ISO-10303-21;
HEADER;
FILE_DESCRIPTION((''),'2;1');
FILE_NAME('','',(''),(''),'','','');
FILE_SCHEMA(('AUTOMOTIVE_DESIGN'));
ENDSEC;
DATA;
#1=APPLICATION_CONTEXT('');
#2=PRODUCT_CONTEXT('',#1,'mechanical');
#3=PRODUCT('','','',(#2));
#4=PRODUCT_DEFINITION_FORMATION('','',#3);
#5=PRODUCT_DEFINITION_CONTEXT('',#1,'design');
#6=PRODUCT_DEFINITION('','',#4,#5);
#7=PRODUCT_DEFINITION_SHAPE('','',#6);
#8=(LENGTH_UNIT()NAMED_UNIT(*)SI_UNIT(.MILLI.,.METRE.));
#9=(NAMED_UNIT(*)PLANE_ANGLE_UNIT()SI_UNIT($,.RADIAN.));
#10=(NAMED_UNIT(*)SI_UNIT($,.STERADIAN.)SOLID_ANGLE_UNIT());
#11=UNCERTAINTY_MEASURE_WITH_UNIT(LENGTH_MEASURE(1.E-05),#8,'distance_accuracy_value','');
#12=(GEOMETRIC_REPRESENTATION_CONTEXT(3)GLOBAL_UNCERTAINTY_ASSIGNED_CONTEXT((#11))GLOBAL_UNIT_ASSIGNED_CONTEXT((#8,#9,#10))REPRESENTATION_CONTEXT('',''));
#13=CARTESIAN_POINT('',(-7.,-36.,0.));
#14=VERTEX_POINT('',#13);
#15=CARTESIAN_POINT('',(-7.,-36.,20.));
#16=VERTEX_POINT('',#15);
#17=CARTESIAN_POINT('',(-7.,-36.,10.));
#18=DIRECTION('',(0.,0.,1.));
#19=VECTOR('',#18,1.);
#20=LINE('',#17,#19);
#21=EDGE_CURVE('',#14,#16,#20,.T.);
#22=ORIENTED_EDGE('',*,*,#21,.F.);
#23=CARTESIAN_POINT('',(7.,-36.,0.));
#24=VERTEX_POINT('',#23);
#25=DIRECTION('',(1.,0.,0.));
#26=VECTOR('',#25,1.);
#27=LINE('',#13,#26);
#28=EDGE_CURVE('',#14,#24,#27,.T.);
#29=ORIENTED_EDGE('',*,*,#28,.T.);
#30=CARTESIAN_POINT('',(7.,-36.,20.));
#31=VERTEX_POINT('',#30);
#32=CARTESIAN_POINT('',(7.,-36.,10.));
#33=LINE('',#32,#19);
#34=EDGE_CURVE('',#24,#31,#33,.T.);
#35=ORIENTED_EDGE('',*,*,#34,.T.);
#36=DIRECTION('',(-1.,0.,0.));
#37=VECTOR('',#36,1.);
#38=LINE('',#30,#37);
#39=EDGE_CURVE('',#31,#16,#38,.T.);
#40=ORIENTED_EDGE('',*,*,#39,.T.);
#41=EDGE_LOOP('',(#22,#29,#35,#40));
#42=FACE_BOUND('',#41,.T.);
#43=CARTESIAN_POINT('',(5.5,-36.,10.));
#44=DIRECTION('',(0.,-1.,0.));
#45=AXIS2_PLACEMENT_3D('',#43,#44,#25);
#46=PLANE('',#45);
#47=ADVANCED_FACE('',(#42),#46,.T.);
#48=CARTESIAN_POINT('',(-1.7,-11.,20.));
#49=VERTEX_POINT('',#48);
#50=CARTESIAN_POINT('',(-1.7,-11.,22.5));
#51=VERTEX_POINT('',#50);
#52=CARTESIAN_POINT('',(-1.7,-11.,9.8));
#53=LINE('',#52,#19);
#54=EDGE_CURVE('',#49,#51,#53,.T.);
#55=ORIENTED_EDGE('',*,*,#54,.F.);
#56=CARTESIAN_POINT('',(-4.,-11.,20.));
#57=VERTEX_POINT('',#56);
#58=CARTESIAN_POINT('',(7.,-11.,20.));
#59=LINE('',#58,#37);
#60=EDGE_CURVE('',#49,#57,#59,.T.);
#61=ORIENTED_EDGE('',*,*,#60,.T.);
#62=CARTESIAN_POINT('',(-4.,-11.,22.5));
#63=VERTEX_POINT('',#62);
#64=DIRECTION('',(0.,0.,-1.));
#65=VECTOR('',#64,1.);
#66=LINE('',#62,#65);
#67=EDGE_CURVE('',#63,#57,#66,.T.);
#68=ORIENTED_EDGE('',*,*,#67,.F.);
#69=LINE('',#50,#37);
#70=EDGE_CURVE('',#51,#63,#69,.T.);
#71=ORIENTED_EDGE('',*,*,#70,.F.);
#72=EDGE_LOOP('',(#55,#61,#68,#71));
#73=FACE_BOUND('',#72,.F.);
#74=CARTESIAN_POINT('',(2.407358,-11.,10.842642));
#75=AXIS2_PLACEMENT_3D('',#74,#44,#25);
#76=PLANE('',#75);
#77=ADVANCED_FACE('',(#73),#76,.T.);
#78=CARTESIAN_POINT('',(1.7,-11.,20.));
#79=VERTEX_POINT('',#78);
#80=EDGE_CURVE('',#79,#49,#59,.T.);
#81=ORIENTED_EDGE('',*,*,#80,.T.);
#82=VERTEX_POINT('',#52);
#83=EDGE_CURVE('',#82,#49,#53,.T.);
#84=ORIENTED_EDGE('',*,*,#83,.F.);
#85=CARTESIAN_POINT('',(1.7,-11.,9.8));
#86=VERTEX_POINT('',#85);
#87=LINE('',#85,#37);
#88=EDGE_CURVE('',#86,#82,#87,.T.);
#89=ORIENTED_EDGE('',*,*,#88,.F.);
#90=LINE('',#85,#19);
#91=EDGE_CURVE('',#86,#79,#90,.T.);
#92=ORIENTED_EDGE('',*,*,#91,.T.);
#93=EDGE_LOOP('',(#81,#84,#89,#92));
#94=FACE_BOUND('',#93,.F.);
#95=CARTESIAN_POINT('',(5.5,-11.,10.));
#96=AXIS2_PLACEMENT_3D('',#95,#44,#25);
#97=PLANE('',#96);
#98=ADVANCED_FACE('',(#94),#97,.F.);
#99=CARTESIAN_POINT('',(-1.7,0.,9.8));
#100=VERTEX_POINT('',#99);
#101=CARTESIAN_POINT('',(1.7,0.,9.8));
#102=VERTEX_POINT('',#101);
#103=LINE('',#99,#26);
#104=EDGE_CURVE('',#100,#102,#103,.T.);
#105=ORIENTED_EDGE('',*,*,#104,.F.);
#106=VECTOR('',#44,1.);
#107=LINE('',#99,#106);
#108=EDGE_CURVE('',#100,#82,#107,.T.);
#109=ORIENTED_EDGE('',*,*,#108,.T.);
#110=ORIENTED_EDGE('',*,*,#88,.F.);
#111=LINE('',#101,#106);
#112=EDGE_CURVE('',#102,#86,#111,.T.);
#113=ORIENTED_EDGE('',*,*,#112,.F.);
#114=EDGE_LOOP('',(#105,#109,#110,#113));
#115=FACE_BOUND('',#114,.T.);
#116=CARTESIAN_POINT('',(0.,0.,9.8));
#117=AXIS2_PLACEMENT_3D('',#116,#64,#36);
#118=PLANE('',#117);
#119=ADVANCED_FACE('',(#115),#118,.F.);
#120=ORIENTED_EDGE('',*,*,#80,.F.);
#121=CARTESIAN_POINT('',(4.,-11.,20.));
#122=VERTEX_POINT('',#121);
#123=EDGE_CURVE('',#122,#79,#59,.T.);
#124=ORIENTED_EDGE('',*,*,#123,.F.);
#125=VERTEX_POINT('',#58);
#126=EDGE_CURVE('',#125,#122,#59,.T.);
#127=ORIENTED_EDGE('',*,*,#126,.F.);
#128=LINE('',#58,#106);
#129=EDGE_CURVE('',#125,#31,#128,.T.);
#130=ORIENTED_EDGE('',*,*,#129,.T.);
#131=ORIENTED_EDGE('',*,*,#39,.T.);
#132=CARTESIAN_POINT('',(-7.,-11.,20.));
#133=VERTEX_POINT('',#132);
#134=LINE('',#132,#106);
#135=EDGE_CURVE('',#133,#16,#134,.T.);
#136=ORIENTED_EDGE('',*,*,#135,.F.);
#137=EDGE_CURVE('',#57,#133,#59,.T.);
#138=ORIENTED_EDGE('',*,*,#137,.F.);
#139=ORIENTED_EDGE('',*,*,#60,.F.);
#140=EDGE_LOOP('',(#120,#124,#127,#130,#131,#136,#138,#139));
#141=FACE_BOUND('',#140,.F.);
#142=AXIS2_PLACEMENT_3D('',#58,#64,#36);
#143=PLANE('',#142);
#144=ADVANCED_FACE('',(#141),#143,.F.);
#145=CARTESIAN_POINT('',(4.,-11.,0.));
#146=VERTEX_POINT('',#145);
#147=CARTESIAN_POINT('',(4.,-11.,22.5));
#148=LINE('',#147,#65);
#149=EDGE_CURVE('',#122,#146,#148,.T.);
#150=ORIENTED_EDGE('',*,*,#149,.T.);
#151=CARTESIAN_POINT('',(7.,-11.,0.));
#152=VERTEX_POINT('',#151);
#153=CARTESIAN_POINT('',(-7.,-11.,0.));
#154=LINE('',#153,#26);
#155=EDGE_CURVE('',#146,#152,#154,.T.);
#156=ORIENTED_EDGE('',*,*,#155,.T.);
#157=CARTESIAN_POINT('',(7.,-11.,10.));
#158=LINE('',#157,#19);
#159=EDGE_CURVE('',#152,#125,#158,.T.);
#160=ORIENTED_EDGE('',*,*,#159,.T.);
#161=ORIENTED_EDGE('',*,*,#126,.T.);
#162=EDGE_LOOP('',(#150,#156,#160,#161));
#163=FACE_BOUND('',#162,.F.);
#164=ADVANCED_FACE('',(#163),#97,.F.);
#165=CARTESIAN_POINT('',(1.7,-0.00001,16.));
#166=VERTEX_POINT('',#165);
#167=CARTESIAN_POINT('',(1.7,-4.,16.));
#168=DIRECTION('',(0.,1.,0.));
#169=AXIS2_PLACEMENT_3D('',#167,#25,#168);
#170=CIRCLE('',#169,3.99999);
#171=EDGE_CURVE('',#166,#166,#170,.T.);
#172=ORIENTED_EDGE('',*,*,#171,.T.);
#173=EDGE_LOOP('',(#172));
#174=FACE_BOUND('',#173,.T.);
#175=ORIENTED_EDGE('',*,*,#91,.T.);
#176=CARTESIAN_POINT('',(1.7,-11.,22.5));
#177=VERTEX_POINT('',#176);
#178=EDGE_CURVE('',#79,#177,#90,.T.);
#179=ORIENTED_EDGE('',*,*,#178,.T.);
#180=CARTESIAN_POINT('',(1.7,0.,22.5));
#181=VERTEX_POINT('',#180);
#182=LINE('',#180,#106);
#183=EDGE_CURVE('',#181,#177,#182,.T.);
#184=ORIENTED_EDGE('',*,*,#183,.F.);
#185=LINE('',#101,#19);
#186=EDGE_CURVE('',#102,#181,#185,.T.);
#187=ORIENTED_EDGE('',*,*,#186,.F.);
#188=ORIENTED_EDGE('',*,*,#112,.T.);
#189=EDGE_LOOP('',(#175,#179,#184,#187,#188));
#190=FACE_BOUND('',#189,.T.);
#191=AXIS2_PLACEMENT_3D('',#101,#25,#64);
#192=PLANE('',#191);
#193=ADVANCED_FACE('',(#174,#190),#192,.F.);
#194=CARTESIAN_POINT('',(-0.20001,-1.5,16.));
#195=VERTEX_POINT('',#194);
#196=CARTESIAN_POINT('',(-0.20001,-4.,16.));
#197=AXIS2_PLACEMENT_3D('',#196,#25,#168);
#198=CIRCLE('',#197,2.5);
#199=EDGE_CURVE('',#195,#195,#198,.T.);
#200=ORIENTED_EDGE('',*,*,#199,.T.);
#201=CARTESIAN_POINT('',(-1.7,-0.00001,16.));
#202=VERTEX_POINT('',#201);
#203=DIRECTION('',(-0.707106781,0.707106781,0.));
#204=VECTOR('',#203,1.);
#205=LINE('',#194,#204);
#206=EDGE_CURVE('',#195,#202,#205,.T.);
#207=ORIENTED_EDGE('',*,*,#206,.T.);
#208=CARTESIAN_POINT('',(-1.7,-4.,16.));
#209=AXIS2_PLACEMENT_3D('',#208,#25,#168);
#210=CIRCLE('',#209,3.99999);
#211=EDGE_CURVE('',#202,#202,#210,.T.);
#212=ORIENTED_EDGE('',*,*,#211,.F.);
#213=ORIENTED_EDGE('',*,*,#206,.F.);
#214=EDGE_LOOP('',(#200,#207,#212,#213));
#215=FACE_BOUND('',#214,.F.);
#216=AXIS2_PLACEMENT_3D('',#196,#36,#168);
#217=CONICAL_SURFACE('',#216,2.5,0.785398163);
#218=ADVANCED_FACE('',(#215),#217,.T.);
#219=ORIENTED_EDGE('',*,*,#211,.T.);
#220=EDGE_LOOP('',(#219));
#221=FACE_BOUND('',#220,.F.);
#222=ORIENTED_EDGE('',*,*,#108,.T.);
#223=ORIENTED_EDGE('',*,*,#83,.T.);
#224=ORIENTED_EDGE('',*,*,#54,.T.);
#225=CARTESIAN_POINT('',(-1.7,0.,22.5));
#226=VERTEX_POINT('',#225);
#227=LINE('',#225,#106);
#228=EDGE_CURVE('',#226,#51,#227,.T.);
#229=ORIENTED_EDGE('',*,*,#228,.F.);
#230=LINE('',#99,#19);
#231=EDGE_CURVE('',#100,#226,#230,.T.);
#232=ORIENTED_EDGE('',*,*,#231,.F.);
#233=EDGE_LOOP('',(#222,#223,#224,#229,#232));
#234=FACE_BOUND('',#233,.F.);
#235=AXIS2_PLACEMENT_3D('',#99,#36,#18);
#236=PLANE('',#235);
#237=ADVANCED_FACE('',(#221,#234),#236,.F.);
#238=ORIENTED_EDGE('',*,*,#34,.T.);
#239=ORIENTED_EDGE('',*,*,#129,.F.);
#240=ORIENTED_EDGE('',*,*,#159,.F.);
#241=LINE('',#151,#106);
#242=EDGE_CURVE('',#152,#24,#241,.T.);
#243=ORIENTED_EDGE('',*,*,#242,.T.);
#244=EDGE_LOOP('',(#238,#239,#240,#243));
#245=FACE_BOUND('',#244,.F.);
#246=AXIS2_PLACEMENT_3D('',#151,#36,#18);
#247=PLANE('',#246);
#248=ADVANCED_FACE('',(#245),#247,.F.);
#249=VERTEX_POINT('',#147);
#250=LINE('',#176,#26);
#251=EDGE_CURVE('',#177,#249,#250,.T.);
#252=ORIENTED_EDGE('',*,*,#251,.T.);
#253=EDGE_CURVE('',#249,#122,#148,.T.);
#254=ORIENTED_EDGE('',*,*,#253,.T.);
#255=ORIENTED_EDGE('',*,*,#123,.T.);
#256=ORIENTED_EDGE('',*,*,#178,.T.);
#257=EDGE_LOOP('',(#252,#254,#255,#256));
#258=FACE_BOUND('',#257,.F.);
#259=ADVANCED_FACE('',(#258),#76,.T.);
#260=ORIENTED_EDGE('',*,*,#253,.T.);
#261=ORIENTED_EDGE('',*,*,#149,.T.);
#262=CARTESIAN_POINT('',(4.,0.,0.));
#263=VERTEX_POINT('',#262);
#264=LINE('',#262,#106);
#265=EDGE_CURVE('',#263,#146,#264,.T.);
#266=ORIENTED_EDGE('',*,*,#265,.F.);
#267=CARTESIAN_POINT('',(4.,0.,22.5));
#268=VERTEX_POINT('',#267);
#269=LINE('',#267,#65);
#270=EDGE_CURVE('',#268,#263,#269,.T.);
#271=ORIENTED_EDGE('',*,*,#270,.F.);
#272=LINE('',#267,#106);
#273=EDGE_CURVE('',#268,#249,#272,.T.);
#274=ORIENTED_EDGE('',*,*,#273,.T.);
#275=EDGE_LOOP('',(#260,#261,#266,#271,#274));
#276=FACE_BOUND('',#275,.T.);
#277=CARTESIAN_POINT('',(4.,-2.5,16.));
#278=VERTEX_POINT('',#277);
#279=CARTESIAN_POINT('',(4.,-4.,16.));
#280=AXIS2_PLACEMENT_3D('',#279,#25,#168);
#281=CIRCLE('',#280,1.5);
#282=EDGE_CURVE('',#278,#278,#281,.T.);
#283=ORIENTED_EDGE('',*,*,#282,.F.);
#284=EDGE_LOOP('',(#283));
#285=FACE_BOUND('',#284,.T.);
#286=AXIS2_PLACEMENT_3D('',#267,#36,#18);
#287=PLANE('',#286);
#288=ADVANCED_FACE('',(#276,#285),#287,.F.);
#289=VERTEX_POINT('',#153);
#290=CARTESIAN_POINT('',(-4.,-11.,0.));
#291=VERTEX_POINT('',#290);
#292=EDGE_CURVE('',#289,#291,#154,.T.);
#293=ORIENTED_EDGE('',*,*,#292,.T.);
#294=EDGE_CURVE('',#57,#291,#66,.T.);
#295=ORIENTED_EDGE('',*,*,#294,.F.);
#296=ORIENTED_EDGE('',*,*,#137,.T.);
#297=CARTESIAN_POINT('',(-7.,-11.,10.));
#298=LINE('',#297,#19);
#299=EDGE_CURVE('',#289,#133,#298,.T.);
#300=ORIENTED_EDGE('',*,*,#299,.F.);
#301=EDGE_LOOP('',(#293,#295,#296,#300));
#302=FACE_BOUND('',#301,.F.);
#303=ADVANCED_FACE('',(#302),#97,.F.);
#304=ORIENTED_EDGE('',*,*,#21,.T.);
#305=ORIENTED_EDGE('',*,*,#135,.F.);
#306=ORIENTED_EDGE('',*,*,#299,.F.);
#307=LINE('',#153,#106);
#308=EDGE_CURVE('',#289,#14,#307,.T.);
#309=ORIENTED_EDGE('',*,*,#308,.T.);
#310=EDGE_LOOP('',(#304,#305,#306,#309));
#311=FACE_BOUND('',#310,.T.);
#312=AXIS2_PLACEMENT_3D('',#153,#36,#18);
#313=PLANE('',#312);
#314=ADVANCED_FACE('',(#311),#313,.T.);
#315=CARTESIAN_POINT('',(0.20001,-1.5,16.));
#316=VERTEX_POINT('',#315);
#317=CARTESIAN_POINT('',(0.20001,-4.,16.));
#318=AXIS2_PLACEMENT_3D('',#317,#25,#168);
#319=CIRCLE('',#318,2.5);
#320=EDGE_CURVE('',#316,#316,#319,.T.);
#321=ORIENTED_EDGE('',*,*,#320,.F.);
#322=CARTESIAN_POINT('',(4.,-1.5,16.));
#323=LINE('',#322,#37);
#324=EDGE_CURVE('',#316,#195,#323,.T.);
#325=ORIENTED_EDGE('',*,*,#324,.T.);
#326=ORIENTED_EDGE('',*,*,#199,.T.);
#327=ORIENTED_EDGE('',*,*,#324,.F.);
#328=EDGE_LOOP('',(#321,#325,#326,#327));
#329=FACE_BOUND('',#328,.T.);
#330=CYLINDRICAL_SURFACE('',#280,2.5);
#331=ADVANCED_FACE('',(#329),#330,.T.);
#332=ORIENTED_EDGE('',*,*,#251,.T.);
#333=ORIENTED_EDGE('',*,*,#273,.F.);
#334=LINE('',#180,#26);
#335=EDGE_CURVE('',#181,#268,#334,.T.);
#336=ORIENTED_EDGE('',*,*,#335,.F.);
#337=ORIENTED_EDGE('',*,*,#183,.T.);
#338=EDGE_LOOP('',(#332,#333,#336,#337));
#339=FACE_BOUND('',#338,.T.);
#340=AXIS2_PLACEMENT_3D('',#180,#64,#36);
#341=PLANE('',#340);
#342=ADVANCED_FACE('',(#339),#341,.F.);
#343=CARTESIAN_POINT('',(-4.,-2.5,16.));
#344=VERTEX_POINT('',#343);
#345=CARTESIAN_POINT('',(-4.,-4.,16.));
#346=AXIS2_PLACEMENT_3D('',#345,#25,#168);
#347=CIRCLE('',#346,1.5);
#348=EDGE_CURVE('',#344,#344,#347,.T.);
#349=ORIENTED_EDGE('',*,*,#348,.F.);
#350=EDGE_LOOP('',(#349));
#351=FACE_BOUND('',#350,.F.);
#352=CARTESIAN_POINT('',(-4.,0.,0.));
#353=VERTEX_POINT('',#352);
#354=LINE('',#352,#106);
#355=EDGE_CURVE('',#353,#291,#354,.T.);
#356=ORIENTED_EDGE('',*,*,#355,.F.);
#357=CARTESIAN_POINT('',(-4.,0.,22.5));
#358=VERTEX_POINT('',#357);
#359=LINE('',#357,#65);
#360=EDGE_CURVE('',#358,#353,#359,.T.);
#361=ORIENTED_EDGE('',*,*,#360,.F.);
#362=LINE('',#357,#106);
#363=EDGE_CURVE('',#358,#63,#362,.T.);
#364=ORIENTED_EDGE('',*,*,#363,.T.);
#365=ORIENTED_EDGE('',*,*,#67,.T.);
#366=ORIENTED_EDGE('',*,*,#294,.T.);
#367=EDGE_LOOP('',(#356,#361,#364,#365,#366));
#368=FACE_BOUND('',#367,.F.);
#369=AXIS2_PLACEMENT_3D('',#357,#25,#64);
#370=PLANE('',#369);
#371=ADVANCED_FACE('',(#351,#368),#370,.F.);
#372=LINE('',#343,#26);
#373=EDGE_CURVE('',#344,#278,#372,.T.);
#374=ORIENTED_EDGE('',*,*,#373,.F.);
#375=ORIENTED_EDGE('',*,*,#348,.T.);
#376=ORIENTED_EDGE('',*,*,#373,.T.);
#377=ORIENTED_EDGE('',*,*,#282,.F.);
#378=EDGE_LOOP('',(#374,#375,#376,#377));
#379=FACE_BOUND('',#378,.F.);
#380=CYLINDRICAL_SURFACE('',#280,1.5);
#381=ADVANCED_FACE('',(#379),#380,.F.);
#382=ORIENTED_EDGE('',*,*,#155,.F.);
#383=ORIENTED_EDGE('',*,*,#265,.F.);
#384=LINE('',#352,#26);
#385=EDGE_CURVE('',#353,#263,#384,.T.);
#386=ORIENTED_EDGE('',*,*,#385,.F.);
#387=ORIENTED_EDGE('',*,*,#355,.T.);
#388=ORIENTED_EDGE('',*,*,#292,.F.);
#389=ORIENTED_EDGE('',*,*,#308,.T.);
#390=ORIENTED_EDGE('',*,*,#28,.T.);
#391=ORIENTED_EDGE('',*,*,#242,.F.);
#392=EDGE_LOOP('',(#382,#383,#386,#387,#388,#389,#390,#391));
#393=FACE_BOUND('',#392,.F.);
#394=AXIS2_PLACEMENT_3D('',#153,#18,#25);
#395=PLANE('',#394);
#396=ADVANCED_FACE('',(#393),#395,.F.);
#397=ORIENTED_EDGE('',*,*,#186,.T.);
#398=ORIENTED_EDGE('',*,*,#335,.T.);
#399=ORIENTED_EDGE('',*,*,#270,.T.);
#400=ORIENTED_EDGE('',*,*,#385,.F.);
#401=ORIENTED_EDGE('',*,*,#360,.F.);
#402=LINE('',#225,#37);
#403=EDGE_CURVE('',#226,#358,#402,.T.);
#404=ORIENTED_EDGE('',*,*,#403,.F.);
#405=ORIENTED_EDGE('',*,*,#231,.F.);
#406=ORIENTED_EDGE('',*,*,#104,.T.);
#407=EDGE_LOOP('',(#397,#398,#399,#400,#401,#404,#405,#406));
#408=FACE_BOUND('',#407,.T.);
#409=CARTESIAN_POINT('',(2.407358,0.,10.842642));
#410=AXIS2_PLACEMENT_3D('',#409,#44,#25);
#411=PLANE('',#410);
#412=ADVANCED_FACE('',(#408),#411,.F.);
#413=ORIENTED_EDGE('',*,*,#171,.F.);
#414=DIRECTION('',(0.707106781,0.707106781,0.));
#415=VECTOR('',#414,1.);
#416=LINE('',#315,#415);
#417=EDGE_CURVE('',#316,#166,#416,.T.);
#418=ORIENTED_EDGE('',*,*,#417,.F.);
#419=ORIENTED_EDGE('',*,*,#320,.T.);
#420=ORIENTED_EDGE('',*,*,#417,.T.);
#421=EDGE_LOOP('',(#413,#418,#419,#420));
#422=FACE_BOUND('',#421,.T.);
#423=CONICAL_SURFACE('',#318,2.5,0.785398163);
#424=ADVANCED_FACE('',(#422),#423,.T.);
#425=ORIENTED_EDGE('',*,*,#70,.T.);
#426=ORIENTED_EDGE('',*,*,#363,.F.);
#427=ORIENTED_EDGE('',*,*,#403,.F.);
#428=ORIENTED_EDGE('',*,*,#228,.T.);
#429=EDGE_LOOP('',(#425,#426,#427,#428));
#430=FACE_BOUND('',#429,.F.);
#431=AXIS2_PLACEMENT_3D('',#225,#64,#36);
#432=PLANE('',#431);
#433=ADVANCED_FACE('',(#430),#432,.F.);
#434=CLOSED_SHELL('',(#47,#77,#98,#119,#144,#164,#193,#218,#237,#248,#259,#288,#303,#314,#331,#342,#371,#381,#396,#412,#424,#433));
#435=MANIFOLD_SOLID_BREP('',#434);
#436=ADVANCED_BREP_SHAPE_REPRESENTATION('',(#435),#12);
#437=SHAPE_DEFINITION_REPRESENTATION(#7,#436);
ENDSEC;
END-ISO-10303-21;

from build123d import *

# Parameters (mm, degrees)
F1_DEPTH = 11
F3_W     = 3
F3_H     = 20
F3_W_2   = 3.4
F3_H_2   = 10.2
F4_DEPTH = 25
F5_R     = 1.5
F6_DEPTH = 25
F5_R_2   = 2.5
F7_DEPTH = 8
F8_SIZE  = 1.49999
F9_SIZE  = 1.49999


# Not quite as in the source:
# - a fillet or chamfer is up to 0.001 mm smaller than in the source, because OpenCascade refuses the exact size


with BuildPart() as f1:
    # F0 (on Front) → F1 (new body)
    with BuildSketch(Plane.XZ):
        Polygon((-4, 0), (0, 0), (0, 9.8), (-1.7, 9.8), (-1.7, 22.5), (-4, 22.5), align=None)
    extrude(amount=F1_DEPTH)

    # F2: F1 across face


with BuildPart() as f1_1:
    add(f1.part)
    add(f1.part.mirror(Plane(origin=(0, -5.5, 4.9), x_dir=(0, 1, 0), z_dir=(1, 0, 0))))

    # F3 (on face) → F4 (join)
    with BuildSketch(Plane.XZ.offset(11)):
        with Locations((5.5, 10)):
            Rectangle(F3_W, F3_H)
        with Locations((0, 14.9)):
            Rectangle(F3_W_2, F3_H_2)
        Polygon((-4, 0), (0, 0), (4, 0), (4, 20), (1.7, 20), (1.7, 9.8), (-1.7, 9.8), (-1.7, 20), (-4, 20), align=None)
        with Locations((-5.5, 10)):
            Rectangle(F3_W, F3_H)
    extrude(amount=F4_DEPTH)

    # F5 (on face) → F6 (cut)
    with BuildSketch(Plane.YZ.offset(4)):
        with Locations((-4, 16)):
            Circle(F5_R)
    extrude(amount=-F6_DEPTH, mode=Mode.SUBTRACT)

    # F5 (on face) → F7 (join, through all)
    with BuildSketch(Plane.YZ.offset(4)):
        with Locations((-4, 16)):
            Circle(F5_R_2)
        with Locations((-4, 16)):
            Circle(F5_R, mode=Mode.SUBTRACT)
    extrude(amount=-F7_DEPTH)

    # F8 (size 1.5 in the source; OpenCascade refuses exactly that, so slightly less here)
    f8_edges = [f1_1.edges().sort_by_distance(p)[0] for p in [
        (-1.7, -6.5, 16),
    ]]
    chamfer(f8_edges, length=F8_SIZE)

    # F9 (size 1.5 in the source; OpenCascade refuses exactly that, so slightly less here)
    f9_edges = [f1_1.edges().sort_by_distance(p)[0] for p in [
        (1.7, -6.5, 16),
    ]]
    chamfer(f9_edges, length=F9_SIZE)


solid = f1_1.part
